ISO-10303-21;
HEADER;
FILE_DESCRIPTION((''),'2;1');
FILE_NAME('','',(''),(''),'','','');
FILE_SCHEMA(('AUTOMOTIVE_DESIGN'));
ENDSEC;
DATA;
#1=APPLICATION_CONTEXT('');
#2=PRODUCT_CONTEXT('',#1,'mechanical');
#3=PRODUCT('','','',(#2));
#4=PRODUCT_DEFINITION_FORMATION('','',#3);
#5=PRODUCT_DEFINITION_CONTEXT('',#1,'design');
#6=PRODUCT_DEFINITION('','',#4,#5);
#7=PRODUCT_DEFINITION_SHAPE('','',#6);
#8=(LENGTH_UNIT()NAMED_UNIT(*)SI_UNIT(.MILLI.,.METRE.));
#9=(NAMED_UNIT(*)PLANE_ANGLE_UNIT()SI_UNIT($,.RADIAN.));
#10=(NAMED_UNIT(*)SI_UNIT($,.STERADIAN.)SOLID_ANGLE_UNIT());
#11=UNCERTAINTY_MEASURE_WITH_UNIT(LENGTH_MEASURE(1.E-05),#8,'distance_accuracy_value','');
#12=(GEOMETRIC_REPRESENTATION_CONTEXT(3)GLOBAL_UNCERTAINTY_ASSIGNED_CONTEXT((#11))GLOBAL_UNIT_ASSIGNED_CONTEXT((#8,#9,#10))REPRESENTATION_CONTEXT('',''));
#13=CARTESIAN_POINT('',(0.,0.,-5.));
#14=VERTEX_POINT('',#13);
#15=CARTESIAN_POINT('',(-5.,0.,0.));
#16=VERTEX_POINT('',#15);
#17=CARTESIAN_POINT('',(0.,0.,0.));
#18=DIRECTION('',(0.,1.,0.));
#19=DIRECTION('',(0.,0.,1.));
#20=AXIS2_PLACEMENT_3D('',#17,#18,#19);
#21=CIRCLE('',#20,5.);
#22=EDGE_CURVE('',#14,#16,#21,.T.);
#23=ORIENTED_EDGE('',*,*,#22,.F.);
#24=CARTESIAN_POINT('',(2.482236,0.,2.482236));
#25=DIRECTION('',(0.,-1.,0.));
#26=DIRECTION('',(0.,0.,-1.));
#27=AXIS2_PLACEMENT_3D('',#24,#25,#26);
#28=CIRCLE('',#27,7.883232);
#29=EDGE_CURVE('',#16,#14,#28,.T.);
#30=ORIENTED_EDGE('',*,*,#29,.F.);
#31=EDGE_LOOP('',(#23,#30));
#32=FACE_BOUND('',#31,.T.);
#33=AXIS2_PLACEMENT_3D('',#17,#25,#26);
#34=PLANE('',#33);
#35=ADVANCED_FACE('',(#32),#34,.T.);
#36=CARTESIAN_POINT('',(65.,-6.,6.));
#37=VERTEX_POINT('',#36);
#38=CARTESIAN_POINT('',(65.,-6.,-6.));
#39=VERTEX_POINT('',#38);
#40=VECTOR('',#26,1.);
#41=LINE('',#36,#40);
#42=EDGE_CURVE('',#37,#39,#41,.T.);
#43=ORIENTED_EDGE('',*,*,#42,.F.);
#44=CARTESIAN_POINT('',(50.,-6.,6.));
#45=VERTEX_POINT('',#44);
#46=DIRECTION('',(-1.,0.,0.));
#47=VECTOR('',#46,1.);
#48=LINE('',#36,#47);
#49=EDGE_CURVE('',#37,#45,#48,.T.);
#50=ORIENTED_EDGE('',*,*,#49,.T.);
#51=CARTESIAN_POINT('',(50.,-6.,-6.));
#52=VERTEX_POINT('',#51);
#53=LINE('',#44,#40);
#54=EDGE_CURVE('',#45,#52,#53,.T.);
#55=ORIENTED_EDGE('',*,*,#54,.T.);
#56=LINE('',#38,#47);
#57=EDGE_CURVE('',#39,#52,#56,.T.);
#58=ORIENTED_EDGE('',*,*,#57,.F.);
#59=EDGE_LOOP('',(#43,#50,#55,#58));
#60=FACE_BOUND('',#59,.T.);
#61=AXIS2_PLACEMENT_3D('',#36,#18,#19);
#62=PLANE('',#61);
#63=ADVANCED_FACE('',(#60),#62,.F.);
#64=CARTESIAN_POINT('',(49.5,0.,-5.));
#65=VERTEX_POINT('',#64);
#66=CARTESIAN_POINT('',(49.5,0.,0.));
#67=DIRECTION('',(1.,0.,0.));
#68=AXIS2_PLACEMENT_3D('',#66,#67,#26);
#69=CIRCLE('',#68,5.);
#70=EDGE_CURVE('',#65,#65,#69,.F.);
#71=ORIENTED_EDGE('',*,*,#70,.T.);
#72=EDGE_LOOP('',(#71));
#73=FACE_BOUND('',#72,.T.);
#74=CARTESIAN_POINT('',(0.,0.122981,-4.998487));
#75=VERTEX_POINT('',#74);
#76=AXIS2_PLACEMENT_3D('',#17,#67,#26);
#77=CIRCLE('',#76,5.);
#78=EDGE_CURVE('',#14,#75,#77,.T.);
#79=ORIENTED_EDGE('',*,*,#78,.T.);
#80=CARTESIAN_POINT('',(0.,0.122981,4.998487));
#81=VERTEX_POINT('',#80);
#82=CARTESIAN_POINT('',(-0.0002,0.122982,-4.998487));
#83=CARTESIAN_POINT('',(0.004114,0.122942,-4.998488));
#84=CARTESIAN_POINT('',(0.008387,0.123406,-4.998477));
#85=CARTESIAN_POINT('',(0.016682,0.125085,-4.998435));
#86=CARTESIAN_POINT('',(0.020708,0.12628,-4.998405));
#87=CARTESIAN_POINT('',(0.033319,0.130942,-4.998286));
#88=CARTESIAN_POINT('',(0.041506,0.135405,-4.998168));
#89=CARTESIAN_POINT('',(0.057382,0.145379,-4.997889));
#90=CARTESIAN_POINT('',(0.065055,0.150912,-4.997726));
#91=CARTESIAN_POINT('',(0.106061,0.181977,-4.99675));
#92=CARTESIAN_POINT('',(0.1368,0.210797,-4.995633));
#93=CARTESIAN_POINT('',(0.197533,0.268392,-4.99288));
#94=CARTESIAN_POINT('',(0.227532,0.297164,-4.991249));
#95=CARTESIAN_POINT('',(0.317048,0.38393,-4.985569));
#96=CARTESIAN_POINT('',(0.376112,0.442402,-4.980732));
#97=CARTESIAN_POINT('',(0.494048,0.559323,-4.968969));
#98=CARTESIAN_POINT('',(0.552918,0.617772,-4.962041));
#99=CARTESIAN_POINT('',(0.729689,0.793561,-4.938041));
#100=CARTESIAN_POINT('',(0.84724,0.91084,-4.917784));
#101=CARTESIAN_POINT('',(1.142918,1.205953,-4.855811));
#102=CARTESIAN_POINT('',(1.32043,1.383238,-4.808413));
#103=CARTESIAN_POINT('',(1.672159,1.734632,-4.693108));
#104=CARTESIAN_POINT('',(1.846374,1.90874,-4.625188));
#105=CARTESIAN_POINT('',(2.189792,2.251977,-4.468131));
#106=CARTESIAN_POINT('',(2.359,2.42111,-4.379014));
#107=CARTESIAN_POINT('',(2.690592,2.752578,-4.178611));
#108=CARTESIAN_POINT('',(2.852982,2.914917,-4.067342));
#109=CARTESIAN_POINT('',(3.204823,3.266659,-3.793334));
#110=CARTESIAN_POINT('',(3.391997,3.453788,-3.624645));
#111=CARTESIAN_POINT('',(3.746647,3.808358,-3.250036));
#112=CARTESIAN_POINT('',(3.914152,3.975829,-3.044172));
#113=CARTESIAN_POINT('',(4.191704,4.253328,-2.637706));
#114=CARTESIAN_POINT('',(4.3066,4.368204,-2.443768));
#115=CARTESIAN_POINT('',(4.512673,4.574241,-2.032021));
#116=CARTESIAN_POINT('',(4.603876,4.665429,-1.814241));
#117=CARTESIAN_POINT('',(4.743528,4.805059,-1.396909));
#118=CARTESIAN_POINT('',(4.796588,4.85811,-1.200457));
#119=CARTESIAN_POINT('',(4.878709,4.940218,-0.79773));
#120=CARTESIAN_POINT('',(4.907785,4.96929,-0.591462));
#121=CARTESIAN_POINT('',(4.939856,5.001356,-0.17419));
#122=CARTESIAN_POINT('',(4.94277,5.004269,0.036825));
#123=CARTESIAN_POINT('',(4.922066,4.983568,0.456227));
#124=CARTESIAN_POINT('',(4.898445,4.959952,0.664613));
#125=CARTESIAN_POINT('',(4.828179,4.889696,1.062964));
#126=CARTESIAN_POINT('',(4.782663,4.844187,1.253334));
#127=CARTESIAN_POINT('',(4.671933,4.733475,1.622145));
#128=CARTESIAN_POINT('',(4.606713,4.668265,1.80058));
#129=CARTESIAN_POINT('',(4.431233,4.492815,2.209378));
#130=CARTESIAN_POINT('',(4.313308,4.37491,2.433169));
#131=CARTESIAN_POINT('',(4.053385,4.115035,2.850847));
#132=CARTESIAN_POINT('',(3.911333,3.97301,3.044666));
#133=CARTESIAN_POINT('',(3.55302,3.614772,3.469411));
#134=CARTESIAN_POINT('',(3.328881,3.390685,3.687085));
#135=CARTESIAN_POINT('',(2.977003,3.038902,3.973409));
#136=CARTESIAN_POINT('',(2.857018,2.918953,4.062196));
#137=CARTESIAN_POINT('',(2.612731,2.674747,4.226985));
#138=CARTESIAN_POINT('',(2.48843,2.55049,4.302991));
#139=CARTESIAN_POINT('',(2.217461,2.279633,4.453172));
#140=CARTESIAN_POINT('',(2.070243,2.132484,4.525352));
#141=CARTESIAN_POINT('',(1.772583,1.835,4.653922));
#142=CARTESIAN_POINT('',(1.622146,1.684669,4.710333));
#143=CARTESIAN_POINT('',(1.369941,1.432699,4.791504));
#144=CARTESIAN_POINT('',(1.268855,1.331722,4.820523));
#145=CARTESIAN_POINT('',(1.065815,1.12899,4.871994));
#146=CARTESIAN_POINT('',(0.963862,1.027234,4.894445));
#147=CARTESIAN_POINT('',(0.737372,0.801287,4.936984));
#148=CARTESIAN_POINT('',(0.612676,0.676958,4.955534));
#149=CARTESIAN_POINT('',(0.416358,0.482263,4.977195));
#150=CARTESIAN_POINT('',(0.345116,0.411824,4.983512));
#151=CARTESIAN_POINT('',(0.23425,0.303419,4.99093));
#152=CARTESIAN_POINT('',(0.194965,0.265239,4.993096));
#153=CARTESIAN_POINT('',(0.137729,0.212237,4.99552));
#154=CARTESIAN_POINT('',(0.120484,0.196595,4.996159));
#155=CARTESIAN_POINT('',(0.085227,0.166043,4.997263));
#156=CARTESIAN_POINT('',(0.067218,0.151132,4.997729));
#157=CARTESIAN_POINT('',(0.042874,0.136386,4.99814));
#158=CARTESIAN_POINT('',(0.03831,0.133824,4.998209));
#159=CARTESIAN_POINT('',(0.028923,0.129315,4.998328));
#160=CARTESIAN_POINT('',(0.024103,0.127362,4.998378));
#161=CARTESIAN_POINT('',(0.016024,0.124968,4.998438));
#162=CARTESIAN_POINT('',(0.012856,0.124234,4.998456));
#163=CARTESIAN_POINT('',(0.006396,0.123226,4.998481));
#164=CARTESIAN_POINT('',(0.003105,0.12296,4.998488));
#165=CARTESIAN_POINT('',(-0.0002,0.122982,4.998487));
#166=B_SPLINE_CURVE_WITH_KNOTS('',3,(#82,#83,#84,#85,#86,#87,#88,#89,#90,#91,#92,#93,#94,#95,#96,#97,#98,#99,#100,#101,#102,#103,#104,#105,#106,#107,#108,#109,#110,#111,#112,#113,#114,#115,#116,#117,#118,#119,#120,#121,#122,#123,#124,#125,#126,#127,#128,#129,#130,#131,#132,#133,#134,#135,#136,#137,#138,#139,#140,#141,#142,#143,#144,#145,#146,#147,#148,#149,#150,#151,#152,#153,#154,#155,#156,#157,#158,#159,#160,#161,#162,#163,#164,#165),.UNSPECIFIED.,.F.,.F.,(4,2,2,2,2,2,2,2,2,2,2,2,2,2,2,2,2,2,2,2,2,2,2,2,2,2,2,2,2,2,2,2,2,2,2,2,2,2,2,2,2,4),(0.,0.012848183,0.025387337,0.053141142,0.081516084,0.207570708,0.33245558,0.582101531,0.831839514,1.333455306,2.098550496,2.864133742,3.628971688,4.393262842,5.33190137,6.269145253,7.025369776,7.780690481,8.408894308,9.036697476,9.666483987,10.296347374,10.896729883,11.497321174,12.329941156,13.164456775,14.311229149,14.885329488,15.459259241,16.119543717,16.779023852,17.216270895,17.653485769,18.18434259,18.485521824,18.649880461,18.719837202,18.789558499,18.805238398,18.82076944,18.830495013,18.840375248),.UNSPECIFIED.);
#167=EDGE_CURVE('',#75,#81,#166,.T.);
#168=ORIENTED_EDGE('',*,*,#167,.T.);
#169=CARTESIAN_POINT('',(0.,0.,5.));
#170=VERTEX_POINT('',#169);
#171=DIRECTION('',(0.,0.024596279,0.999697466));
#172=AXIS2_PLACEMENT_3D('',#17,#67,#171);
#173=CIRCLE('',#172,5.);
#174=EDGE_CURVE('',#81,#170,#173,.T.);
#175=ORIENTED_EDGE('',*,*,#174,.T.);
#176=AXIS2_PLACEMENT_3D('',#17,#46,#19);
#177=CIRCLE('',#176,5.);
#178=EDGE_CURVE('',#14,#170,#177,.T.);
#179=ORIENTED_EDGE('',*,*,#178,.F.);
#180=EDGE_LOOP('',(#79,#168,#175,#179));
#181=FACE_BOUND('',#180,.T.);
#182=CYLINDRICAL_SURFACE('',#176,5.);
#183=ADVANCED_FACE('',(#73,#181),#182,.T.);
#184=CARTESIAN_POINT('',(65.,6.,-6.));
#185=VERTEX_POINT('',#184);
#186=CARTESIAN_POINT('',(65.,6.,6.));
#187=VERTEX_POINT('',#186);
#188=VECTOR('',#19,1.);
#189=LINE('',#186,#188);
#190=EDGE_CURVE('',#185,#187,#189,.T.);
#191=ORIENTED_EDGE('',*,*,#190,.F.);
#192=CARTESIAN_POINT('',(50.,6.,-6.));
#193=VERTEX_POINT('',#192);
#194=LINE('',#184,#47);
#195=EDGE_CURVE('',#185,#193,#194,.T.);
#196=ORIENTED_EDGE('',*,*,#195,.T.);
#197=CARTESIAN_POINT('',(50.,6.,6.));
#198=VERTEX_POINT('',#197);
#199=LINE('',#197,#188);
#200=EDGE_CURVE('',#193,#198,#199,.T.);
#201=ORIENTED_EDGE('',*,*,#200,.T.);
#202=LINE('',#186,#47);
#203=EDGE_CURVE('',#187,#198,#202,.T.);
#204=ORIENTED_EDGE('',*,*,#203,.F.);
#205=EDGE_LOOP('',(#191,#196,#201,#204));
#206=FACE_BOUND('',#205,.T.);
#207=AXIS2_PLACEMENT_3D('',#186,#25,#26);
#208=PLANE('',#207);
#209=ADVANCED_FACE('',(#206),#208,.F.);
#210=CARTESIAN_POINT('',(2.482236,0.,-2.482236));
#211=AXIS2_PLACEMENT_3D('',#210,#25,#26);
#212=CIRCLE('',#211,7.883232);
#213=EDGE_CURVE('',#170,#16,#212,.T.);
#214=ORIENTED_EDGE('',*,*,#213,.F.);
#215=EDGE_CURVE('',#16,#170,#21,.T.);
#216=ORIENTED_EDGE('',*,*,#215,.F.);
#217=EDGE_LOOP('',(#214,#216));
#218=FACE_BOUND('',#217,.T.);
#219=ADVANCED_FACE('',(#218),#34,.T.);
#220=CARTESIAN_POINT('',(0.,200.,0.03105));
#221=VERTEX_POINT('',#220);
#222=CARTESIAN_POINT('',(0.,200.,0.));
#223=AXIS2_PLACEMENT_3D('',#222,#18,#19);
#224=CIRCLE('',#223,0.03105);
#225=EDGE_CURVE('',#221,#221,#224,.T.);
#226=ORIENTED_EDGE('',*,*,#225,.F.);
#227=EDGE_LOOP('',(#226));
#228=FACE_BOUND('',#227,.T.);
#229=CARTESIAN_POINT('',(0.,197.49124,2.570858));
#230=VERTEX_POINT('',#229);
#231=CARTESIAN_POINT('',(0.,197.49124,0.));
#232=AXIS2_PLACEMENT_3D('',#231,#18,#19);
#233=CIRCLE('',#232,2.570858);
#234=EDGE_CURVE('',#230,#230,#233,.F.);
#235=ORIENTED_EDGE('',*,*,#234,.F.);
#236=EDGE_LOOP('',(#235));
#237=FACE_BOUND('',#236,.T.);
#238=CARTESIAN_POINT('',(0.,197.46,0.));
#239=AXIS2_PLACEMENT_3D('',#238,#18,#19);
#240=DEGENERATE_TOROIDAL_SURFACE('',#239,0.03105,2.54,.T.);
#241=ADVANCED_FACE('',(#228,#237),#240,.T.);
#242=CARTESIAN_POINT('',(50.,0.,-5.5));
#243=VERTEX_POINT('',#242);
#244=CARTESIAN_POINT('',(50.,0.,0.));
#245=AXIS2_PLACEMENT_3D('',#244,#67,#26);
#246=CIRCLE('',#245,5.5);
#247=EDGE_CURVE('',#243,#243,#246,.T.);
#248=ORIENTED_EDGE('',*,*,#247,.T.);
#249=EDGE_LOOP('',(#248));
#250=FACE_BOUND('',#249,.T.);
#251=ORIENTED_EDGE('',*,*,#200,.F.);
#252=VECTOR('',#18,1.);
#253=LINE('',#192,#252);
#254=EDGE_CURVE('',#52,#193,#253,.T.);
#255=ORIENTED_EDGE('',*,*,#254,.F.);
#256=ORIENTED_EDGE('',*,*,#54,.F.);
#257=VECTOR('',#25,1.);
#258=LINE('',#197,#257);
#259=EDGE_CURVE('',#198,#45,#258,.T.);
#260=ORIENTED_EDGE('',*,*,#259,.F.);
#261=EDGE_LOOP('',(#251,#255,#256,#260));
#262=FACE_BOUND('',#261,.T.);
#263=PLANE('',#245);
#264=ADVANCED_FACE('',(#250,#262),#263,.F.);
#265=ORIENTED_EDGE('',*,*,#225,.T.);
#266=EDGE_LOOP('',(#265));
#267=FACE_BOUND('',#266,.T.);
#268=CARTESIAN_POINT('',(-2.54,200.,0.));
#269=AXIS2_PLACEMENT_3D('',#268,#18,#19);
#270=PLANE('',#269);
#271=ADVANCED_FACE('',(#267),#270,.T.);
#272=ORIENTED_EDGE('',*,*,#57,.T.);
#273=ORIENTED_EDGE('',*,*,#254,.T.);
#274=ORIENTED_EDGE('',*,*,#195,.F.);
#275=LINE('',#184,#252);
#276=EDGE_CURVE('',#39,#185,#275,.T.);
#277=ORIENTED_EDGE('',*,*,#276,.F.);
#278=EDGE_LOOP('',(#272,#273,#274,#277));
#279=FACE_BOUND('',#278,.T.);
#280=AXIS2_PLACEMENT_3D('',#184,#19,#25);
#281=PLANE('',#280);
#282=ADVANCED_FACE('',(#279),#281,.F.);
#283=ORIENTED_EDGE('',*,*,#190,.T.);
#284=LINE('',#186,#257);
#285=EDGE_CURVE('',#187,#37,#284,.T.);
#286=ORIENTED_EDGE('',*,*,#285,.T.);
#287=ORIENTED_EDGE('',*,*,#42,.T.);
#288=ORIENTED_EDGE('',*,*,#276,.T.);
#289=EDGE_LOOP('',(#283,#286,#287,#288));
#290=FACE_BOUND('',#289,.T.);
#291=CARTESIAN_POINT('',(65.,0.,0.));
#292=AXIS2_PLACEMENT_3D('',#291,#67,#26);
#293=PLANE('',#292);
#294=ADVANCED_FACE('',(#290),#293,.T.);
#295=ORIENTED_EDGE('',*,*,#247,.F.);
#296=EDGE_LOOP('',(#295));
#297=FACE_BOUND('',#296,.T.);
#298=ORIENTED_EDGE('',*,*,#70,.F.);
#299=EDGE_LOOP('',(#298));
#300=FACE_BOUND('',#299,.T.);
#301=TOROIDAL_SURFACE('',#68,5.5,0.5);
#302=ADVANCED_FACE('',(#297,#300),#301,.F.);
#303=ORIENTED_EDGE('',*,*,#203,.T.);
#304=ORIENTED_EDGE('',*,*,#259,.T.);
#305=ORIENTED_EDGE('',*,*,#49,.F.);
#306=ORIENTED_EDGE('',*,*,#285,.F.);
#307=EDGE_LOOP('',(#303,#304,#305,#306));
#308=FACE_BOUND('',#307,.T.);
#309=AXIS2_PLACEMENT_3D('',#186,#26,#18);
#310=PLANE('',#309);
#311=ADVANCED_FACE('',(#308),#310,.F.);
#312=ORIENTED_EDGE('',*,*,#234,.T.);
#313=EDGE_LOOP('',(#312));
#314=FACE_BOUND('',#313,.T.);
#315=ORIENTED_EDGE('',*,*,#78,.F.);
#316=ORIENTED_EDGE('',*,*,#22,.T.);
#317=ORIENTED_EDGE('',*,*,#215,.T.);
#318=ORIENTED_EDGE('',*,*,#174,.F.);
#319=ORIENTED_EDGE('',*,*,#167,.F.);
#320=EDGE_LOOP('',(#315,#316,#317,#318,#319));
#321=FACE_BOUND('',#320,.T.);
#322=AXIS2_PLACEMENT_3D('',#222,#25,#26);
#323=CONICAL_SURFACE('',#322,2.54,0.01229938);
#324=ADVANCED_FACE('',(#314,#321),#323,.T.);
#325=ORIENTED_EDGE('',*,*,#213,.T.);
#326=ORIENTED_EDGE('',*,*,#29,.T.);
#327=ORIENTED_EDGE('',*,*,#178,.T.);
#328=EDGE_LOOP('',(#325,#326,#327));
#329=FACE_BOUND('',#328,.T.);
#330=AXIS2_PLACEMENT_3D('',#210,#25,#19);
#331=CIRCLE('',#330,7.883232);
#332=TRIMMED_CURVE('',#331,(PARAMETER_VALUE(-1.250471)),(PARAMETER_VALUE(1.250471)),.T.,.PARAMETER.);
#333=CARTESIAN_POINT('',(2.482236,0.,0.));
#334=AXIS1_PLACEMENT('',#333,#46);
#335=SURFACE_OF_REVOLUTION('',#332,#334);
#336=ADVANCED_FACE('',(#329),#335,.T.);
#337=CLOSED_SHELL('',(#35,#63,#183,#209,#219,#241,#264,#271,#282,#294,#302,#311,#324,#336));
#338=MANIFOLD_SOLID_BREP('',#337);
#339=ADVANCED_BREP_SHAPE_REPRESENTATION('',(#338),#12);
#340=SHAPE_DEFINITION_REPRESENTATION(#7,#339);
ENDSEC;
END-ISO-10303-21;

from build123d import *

# Parameters (mm, degrees)
FILLET1_R           = 2.54
SKETCH3_W           = 12
SKETCH3_H           = 12
BOSS_EXTRUDE1_DEPTH = 15
FILLET2_R           = 0.5


# Read off the part's stored shape, not the designer's step: Revolve2
with BuildPart() as part:
    # Sketch1 → Revolve1 (revolve)
    with BuildSketch(Plane.XY, mode=Mode.PRIVATE) as revolve1_sk:
        Polygon((-5, 0), (-2.54, 200), (0, 200), (0, 0), align=None)
    revolve(revolve1_sk.sketch.rotate(Axis((0, 92.12962963, 0), (0, -1, 0)), 270), axis=Axis((0, 92.12962963, 0), (0, -1, 0)))

    # Fillet1
    fillet1_edges = [part.edges().sort_by_distance(p)[0] for p in [
        (0, 200, -2.54),
    ]]
    fillet(fillet1_edges, radius=FILLET1_R)

    # Revolve2 outline → Revolve2 (revolve)
    with BuildSketch(Plane.YX):
        with BuildLine():
            Line((0, 50), (0, -5))
            add(Edge.make_bspline(
                [(5, 0), (3.754456839, -3.754456839), (0, -5)],
                knots=[0.320325383, 0.320325383, 0.320325383, 1.250470944, 1.250470944, 1.250470944], degree=2, weights=[1, 0.893788927, 1]))
            Line((5, 0), (5, 50))
            Line((5, 50), (0, 50))
        make_face()
    revolve(axis=Axis((0, 0, 0), (1, 0, 0)))

    # Sketch3 → Boss-Extrude1 (add)
    with BuildSketch(Plane(origin=(50, 0, 0), x_dir=(0, 0, -1), z_dir=(1, 0, 0))):
        Rectangle(SKETCH3_W, SKETCH3_H)
    extrude(amount=BOSS_EXTRUDE1_DEPTH)

    # Fillet2
    fillet2_edges = [part.edges().sort_by_distance(p)[0] for p in [
        (50, -5, 0),
    ]]
    fillet(fillet2_edges, radius=FILLET2_R)


solid = part.part
